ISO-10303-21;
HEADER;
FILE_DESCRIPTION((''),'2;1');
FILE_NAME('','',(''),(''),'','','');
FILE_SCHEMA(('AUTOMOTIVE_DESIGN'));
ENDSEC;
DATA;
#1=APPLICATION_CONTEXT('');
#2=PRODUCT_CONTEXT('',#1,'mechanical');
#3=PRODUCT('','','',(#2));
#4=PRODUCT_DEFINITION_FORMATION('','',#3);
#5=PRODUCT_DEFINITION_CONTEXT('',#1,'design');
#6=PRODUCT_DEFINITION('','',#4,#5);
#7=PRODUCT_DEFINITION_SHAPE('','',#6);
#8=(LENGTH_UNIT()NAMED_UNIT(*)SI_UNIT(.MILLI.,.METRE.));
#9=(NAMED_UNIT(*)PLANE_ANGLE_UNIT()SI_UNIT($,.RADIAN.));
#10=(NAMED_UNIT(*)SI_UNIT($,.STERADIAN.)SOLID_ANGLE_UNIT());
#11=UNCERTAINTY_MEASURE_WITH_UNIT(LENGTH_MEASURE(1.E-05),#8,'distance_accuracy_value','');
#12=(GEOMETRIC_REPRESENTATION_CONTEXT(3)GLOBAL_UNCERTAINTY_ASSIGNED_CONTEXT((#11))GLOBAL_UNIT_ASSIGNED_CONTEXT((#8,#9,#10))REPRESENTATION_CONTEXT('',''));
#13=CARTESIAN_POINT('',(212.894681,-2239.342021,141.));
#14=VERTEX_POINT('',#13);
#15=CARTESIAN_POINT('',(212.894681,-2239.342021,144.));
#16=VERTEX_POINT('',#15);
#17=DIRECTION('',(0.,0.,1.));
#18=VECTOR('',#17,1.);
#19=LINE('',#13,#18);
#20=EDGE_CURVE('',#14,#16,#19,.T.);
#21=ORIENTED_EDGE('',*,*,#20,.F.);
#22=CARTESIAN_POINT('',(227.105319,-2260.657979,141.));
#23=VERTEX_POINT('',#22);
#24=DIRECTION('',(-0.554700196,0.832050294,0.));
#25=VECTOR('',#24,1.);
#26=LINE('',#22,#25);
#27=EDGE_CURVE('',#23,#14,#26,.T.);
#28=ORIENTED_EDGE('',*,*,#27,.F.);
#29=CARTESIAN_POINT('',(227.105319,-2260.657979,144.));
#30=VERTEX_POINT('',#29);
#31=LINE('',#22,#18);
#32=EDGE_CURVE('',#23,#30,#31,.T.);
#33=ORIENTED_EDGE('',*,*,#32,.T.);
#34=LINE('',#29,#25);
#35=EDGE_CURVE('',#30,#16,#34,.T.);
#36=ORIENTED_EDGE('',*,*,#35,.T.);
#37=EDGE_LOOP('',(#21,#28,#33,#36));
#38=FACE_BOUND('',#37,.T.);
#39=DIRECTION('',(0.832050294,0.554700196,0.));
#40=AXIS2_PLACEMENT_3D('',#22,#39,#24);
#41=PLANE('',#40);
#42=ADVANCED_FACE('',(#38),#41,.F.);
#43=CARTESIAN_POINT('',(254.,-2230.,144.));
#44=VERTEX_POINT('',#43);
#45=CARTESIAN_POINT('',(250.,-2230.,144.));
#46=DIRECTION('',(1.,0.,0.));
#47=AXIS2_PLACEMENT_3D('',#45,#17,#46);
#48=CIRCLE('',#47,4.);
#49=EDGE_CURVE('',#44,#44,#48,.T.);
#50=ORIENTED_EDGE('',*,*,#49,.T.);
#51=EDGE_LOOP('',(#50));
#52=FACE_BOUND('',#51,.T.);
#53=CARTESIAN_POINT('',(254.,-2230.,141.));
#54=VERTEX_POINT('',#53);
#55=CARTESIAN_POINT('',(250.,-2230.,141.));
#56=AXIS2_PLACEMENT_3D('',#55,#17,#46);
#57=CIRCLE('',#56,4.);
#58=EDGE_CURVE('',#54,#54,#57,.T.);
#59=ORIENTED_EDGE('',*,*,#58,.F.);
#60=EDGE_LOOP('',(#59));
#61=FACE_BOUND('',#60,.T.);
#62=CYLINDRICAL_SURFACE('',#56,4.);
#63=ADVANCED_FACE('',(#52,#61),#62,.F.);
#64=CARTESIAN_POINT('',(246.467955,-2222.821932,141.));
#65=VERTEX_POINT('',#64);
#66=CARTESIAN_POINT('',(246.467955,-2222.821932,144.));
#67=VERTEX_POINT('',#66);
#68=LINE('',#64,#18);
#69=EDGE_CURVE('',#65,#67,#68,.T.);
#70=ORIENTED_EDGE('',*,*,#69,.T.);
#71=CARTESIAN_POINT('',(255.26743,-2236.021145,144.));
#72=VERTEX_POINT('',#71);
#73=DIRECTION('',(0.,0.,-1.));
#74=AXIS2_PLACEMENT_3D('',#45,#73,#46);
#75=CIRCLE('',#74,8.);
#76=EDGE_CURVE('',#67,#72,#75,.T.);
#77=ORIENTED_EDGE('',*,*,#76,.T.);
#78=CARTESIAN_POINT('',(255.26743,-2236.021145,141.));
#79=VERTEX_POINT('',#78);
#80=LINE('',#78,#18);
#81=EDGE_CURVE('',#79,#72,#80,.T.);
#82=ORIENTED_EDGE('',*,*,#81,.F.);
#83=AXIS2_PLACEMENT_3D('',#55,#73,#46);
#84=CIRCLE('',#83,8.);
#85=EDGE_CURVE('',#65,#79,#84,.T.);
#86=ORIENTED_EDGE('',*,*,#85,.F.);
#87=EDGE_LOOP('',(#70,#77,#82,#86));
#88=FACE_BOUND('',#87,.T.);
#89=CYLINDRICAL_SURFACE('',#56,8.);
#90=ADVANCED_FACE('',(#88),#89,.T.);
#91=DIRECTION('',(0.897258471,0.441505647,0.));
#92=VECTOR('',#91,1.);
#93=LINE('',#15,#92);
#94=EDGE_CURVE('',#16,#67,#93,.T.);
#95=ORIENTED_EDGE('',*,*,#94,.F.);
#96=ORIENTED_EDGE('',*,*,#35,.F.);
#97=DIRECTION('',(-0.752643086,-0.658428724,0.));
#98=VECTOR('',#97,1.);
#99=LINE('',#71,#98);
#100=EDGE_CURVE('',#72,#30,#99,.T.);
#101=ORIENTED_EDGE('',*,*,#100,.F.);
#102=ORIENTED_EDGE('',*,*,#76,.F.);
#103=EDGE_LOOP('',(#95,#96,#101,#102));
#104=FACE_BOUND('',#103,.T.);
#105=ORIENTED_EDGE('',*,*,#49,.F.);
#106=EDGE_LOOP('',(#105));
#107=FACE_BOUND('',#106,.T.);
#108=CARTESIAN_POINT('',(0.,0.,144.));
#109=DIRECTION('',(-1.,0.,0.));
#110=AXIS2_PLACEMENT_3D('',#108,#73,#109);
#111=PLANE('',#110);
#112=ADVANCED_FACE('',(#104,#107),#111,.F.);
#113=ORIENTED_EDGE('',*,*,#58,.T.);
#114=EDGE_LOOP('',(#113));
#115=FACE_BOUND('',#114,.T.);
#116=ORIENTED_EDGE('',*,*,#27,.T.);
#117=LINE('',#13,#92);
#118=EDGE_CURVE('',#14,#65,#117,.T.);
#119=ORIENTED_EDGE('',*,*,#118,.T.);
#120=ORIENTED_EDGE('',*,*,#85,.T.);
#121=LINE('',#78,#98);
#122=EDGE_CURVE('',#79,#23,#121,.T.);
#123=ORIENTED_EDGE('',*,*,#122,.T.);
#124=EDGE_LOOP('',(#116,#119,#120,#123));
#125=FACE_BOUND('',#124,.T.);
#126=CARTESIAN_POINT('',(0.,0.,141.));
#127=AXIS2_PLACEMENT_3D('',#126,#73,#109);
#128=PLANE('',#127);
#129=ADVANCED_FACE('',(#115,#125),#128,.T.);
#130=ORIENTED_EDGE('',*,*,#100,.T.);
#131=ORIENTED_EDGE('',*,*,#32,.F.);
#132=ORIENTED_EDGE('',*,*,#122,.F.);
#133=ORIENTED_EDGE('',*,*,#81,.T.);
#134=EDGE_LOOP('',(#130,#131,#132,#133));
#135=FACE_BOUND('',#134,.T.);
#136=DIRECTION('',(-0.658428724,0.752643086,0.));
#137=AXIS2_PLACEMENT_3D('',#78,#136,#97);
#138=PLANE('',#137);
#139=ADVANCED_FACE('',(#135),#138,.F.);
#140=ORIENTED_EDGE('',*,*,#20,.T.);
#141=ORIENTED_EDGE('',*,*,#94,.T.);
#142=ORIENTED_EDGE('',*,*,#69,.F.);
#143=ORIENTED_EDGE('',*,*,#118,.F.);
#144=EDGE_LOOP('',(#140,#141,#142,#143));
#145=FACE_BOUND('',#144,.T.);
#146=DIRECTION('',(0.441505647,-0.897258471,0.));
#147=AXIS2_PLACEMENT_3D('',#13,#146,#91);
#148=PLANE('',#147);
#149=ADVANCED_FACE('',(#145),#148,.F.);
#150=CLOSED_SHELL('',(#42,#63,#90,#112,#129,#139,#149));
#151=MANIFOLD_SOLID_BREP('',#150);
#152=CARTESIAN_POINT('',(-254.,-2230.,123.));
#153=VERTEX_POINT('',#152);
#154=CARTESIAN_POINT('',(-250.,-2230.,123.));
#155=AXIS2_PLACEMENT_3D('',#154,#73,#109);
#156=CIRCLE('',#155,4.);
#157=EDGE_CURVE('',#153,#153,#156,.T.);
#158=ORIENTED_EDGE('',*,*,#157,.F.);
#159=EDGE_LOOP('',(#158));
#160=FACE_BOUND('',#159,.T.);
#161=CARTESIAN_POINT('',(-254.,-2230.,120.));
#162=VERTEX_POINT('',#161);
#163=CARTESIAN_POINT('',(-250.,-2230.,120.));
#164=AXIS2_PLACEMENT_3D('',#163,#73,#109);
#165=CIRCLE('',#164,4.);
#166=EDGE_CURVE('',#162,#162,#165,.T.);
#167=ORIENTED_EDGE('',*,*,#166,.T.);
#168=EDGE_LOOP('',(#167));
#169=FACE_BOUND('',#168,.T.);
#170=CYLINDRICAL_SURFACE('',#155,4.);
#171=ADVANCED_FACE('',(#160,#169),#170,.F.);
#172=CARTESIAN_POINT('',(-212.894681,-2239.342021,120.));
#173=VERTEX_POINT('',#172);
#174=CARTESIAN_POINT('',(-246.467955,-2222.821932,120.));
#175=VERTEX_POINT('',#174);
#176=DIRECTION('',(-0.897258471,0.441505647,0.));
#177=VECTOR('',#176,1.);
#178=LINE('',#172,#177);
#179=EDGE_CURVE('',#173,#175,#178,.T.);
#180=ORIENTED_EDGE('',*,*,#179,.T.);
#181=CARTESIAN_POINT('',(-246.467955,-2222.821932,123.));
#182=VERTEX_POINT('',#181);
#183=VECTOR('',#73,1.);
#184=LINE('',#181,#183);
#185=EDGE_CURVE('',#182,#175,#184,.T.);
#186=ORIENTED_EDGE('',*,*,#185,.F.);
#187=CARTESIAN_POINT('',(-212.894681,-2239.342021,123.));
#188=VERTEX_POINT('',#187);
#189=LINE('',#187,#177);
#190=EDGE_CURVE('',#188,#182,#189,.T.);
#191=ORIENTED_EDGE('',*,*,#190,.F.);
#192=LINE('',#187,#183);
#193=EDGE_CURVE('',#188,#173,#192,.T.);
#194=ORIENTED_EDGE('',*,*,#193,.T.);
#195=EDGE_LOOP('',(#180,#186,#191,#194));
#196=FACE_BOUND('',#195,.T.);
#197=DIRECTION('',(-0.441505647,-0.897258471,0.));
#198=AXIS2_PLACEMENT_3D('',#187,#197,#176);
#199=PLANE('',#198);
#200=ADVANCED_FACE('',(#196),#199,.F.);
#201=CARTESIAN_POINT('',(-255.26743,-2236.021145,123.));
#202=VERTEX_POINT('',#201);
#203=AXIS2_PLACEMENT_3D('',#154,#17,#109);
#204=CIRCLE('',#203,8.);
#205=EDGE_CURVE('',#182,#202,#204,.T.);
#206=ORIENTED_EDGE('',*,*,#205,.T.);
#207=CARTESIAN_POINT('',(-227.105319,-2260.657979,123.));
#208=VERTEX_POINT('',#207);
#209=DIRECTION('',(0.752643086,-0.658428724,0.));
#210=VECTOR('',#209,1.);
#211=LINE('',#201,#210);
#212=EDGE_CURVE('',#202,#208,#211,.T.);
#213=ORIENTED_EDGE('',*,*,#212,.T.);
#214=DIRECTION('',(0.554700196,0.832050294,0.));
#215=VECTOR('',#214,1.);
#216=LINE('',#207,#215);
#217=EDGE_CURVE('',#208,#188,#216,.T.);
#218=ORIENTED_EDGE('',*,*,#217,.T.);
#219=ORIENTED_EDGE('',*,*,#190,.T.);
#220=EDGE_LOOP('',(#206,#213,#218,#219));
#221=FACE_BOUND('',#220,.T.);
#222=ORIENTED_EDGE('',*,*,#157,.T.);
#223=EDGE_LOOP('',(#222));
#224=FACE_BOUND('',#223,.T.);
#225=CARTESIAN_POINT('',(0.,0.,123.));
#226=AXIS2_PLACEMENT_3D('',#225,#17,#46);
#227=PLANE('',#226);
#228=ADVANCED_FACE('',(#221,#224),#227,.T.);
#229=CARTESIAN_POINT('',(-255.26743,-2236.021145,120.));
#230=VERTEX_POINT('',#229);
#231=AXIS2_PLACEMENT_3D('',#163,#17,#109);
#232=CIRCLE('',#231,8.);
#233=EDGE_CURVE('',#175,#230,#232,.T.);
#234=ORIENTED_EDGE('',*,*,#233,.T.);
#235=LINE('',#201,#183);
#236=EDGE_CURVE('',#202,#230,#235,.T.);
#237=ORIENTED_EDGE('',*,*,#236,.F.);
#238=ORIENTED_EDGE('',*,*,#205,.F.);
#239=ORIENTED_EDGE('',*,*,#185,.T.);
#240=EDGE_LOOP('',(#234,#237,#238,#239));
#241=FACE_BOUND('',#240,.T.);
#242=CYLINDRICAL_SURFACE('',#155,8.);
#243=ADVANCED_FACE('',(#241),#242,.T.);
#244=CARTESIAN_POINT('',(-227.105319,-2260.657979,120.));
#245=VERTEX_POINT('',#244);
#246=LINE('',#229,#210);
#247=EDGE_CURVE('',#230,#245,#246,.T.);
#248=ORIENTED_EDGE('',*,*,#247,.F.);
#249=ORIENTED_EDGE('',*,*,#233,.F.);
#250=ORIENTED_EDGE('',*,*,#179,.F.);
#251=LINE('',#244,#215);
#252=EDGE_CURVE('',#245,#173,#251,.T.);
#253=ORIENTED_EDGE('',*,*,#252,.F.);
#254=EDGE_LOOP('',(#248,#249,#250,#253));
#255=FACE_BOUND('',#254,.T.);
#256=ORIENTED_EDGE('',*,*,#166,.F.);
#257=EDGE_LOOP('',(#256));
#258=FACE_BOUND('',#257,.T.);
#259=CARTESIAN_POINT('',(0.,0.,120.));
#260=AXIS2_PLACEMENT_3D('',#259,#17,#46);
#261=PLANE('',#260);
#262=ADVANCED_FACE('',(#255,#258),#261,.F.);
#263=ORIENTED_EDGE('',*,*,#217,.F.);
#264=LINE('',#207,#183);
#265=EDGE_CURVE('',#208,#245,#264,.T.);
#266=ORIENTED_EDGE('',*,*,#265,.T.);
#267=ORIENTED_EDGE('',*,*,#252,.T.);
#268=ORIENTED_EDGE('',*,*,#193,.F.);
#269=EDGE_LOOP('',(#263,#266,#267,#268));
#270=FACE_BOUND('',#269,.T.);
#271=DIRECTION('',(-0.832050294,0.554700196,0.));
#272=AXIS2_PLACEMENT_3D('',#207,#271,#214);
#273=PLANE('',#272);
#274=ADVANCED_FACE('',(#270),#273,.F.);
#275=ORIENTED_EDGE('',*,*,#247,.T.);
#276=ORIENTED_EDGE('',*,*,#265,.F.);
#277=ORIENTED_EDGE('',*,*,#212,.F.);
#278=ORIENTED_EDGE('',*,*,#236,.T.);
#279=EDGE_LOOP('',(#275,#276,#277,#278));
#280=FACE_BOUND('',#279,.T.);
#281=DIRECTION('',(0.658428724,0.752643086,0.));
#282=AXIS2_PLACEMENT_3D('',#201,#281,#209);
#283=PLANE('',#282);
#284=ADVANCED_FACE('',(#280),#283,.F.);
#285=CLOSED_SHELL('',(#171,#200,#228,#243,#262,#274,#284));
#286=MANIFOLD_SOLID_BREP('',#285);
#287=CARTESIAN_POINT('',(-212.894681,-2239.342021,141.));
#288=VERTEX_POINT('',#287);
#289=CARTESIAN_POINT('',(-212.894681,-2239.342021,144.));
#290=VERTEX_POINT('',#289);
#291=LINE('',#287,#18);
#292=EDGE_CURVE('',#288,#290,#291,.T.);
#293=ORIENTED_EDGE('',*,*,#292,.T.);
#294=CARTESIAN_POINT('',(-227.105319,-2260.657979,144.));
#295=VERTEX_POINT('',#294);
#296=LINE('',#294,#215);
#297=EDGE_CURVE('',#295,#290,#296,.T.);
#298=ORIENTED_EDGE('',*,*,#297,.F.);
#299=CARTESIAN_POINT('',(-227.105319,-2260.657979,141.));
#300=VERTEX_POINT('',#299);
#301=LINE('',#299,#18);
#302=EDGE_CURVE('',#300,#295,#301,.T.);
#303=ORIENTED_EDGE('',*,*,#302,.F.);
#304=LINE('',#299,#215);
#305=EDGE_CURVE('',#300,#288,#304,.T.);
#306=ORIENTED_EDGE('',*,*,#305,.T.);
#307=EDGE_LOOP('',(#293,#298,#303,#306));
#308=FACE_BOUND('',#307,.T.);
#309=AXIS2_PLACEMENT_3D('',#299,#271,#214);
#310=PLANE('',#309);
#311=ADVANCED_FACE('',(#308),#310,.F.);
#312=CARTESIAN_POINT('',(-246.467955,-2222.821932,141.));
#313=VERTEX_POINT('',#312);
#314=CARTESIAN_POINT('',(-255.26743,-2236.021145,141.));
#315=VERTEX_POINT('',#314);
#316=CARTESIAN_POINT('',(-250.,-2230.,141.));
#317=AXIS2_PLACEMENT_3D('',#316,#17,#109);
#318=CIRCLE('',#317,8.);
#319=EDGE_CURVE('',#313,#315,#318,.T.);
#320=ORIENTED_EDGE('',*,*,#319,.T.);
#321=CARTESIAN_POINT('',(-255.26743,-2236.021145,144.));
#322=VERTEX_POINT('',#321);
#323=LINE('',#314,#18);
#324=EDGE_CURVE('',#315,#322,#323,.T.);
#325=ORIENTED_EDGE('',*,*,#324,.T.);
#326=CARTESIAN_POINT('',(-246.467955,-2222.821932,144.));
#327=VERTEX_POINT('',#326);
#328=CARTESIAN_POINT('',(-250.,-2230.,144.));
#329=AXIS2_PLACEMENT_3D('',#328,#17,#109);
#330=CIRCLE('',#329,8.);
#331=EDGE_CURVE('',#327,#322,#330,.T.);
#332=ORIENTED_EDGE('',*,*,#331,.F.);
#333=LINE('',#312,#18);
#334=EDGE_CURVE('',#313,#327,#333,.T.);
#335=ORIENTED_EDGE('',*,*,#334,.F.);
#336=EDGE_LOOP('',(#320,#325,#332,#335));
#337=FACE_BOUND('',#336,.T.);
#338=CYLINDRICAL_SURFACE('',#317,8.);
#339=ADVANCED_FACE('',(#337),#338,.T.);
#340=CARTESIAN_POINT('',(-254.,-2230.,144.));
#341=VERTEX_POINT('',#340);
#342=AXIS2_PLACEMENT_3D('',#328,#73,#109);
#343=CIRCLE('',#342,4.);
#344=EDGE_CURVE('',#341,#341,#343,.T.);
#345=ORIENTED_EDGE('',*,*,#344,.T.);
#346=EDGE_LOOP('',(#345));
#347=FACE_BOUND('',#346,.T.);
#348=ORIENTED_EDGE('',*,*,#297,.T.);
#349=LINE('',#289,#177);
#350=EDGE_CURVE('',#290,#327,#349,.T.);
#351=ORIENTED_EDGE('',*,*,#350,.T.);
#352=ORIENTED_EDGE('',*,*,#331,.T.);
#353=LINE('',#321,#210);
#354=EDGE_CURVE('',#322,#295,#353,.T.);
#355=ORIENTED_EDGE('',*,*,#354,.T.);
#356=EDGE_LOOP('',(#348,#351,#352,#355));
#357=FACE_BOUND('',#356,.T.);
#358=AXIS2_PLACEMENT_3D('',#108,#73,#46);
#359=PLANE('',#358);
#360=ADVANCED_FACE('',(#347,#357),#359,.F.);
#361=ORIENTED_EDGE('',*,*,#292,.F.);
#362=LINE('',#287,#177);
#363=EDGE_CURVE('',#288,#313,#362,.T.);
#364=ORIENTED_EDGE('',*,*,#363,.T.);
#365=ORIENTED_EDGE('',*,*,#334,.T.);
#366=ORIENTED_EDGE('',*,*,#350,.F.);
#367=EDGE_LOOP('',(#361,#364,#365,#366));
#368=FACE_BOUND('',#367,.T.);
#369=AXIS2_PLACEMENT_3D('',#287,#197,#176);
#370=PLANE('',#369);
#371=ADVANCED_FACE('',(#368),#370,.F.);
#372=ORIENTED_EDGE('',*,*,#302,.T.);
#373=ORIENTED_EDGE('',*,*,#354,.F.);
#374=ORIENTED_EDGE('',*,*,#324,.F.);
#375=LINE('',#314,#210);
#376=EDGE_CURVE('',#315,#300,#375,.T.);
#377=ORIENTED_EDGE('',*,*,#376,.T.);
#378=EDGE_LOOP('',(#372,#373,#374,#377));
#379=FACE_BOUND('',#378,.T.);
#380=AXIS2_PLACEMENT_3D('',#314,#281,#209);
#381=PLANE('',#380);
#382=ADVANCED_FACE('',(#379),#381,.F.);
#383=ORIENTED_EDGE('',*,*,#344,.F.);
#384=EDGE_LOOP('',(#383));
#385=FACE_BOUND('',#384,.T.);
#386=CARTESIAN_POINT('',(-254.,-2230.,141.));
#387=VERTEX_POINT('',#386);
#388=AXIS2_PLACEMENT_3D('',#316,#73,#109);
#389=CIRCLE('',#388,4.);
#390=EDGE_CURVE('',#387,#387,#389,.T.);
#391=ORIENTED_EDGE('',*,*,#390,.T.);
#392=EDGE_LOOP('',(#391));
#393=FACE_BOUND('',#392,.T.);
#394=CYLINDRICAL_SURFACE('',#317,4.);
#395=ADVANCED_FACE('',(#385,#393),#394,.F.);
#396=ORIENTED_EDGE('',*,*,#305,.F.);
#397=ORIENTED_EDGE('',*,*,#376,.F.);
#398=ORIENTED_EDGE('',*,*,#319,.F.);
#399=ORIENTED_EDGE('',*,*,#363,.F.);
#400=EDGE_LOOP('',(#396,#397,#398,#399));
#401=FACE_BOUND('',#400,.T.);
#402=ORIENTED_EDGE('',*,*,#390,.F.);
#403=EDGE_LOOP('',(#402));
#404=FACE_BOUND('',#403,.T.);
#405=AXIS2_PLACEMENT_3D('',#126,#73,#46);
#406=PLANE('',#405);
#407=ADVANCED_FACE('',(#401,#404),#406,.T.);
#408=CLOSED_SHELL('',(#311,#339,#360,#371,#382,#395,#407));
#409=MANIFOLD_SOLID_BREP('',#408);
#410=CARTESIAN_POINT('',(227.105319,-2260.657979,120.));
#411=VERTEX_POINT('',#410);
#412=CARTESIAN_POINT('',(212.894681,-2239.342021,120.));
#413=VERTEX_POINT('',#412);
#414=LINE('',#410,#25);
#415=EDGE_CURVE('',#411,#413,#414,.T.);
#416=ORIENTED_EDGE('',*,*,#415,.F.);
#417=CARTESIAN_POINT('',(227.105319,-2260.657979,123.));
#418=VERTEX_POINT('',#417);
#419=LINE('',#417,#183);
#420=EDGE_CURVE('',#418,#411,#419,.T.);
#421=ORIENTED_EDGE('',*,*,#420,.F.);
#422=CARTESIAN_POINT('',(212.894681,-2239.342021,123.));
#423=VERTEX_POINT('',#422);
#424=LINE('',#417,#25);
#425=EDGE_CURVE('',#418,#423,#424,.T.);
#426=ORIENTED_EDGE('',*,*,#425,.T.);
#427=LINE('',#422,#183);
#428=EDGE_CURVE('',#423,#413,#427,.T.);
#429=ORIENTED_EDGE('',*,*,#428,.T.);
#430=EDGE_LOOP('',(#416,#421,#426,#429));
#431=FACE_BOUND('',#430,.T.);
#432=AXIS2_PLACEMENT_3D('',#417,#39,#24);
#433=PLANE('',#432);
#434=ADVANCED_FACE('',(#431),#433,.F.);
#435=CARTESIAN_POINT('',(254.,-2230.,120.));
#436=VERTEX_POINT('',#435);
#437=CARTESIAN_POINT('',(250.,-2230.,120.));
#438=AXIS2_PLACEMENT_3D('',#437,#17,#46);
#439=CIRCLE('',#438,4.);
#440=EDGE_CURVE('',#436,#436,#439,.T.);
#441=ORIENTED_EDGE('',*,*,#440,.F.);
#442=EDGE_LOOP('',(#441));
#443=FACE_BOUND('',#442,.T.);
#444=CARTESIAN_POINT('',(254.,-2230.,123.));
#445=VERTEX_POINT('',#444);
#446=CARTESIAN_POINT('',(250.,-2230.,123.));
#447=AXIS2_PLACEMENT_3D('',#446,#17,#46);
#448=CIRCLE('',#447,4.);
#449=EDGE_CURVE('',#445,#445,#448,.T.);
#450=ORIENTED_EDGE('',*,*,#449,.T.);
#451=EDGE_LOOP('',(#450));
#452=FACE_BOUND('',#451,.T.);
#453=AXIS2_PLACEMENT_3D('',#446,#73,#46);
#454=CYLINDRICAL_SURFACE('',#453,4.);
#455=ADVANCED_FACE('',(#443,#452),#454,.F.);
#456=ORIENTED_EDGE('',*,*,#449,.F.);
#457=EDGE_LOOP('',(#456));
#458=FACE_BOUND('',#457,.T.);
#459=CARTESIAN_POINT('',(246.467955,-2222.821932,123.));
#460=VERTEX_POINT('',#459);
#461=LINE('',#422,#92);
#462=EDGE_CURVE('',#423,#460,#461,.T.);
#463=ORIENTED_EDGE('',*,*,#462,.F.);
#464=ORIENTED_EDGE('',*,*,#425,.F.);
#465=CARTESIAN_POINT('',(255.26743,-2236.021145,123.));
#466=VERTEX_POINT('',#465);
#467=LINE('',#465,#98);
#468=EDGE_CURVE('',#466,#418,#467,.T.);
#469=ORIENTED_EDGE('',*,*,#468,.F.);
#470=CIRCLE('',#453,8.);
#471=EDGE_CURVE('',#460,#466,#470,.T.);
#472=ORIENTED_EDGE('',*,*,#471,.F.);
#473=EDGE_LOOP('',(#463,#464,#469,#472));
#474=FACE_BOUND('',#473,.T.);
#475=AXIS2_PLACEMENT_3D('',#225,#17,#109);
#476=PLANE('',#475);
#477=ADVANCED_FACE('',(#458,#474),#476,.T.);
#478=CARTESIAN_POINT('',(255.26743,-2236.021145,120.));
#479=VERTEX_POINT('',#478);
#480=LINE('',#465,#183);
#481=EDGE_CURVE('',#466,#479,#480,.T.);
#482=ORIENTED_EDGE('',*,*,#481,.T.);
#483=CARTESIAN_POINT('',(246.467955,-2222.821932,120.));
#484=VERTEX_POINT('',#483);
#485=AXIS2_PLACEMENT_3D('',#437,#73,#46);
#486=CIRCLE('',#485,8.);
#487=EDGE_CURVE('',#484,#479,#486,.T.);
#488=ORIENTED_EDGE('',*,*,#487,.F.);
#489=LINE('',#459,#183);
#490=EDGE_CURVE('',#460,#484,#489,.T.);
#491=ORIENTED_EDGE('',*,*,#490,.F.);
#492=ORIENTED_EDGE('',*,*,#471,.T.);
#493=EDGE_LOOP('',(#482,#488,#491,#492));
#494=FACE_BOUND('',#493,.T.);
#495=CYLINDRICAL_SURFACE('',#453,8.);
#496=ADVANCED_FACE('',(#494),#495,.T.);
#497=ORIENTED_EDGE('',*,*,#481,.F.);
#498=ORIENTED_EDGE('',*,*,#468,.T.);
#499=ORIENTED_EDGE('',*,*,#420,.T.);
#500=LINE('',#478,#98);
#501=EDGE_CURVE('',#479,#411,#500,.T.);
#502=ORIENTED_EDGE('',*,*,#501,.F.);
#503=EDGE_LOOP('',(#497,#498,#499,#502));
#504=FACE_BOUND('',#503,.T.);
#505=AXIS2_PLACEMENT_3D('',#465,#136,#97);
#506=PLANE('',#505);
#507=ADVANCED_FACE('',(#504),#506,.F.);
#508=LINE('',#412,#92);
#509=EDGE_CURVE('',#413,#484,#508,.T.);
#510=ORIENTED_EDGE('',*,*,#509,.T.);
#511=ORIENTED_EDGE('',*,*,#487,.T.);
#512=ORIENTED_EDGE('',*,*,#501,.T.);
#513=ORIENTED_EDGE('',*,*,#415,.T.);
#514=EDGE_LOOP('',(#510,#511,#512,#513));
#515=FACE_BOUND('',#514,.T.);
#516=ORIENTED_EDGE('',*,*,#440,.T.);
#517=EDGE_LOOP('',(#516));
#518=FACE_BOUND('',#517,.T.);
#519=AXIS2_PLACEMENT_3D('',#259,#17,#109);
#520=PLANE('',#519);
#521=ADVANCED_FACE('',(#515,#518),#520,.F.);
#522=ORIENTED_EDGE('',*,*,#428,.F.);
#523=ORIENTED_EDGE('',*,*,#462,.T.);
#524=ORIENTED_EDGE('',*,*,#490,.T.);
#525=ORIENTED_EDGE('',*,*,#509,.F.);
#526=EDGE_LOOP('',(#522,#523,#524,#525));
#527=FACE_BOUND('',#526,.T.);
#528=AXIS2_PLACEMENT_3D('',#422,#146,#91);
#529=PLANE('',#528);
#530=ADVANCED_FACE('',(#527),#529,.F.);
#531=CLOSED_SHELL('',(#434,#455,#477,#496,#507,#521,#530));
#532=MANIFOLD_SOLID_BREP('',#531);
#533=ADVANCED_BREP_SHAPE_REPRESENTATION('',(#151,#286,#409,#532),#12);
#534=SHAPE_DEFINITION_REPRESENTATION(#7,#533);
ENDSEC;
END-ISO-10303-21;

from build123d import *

# Parameters (mm, degrees)
BOSS_EXTRUDE1_START     = 141
BOSS_EXTRUDE1_OUTLINE_R = 4
BOSS_EXTRUDE1_DEPTH     = 3


# Read off the part's stored shape, not the designer's step: Boss-Extrude1
with BuildPart() as part:
    # Boss-Extrude1 outline → Boss-Extrude1 (new body)
    with BuildSketch(Plane.XY.offset(BOSS_EXTRUDE1_START)):
        with BuildLine():
            Line((212.894680975, -2239.342021462), (227.105319025, -2260.657978538))
            Line((227.105319025, -2260.657978538), (255.267429793, -2236.02114469))
            ThreePointArc((255.267429793, -2236.02114469), (256.656402355, -2225.56239843), (246.467954822, -2222.821932233))
            Line((246.467954822, -2222.821932233), (212.894680975, -2239.342021462))
        make_face()
        with Locations((250, -2230)):
            Circle(BOSS_EXTRUDE1_OUTLINE_R, mode=Mode.SUBTRACT)
    extrude(amount=BOSS_EXTRUDE1_DEPTH)


with BuildPart() as body_2:
    # Mirror1: mirrored copy
    add(part.part.mirror(Plane(origin=(0, 0, 132), x_dir=(1, 0, 0), z_dir=(0, 0, -1))))


with BuildPart() as body_3:
    # Mirror2: mirrored copy
    add(part.part.mirror(Plane(origin=(0, 0, 0), x_dir=(0, 0, 1), z_dir=(1, 0, 0))))


with BuildPart() as body_4:
    # Mirror2 2: mirrored copy
    add(body_2.part.mirror(Plane(origin=(0, 0, 0), x_dir=(0, 0, 1), z_dir=(1, 0, 0))))


solid = Compound([part.part, body_2.part, body_3.part, body_4.part])
